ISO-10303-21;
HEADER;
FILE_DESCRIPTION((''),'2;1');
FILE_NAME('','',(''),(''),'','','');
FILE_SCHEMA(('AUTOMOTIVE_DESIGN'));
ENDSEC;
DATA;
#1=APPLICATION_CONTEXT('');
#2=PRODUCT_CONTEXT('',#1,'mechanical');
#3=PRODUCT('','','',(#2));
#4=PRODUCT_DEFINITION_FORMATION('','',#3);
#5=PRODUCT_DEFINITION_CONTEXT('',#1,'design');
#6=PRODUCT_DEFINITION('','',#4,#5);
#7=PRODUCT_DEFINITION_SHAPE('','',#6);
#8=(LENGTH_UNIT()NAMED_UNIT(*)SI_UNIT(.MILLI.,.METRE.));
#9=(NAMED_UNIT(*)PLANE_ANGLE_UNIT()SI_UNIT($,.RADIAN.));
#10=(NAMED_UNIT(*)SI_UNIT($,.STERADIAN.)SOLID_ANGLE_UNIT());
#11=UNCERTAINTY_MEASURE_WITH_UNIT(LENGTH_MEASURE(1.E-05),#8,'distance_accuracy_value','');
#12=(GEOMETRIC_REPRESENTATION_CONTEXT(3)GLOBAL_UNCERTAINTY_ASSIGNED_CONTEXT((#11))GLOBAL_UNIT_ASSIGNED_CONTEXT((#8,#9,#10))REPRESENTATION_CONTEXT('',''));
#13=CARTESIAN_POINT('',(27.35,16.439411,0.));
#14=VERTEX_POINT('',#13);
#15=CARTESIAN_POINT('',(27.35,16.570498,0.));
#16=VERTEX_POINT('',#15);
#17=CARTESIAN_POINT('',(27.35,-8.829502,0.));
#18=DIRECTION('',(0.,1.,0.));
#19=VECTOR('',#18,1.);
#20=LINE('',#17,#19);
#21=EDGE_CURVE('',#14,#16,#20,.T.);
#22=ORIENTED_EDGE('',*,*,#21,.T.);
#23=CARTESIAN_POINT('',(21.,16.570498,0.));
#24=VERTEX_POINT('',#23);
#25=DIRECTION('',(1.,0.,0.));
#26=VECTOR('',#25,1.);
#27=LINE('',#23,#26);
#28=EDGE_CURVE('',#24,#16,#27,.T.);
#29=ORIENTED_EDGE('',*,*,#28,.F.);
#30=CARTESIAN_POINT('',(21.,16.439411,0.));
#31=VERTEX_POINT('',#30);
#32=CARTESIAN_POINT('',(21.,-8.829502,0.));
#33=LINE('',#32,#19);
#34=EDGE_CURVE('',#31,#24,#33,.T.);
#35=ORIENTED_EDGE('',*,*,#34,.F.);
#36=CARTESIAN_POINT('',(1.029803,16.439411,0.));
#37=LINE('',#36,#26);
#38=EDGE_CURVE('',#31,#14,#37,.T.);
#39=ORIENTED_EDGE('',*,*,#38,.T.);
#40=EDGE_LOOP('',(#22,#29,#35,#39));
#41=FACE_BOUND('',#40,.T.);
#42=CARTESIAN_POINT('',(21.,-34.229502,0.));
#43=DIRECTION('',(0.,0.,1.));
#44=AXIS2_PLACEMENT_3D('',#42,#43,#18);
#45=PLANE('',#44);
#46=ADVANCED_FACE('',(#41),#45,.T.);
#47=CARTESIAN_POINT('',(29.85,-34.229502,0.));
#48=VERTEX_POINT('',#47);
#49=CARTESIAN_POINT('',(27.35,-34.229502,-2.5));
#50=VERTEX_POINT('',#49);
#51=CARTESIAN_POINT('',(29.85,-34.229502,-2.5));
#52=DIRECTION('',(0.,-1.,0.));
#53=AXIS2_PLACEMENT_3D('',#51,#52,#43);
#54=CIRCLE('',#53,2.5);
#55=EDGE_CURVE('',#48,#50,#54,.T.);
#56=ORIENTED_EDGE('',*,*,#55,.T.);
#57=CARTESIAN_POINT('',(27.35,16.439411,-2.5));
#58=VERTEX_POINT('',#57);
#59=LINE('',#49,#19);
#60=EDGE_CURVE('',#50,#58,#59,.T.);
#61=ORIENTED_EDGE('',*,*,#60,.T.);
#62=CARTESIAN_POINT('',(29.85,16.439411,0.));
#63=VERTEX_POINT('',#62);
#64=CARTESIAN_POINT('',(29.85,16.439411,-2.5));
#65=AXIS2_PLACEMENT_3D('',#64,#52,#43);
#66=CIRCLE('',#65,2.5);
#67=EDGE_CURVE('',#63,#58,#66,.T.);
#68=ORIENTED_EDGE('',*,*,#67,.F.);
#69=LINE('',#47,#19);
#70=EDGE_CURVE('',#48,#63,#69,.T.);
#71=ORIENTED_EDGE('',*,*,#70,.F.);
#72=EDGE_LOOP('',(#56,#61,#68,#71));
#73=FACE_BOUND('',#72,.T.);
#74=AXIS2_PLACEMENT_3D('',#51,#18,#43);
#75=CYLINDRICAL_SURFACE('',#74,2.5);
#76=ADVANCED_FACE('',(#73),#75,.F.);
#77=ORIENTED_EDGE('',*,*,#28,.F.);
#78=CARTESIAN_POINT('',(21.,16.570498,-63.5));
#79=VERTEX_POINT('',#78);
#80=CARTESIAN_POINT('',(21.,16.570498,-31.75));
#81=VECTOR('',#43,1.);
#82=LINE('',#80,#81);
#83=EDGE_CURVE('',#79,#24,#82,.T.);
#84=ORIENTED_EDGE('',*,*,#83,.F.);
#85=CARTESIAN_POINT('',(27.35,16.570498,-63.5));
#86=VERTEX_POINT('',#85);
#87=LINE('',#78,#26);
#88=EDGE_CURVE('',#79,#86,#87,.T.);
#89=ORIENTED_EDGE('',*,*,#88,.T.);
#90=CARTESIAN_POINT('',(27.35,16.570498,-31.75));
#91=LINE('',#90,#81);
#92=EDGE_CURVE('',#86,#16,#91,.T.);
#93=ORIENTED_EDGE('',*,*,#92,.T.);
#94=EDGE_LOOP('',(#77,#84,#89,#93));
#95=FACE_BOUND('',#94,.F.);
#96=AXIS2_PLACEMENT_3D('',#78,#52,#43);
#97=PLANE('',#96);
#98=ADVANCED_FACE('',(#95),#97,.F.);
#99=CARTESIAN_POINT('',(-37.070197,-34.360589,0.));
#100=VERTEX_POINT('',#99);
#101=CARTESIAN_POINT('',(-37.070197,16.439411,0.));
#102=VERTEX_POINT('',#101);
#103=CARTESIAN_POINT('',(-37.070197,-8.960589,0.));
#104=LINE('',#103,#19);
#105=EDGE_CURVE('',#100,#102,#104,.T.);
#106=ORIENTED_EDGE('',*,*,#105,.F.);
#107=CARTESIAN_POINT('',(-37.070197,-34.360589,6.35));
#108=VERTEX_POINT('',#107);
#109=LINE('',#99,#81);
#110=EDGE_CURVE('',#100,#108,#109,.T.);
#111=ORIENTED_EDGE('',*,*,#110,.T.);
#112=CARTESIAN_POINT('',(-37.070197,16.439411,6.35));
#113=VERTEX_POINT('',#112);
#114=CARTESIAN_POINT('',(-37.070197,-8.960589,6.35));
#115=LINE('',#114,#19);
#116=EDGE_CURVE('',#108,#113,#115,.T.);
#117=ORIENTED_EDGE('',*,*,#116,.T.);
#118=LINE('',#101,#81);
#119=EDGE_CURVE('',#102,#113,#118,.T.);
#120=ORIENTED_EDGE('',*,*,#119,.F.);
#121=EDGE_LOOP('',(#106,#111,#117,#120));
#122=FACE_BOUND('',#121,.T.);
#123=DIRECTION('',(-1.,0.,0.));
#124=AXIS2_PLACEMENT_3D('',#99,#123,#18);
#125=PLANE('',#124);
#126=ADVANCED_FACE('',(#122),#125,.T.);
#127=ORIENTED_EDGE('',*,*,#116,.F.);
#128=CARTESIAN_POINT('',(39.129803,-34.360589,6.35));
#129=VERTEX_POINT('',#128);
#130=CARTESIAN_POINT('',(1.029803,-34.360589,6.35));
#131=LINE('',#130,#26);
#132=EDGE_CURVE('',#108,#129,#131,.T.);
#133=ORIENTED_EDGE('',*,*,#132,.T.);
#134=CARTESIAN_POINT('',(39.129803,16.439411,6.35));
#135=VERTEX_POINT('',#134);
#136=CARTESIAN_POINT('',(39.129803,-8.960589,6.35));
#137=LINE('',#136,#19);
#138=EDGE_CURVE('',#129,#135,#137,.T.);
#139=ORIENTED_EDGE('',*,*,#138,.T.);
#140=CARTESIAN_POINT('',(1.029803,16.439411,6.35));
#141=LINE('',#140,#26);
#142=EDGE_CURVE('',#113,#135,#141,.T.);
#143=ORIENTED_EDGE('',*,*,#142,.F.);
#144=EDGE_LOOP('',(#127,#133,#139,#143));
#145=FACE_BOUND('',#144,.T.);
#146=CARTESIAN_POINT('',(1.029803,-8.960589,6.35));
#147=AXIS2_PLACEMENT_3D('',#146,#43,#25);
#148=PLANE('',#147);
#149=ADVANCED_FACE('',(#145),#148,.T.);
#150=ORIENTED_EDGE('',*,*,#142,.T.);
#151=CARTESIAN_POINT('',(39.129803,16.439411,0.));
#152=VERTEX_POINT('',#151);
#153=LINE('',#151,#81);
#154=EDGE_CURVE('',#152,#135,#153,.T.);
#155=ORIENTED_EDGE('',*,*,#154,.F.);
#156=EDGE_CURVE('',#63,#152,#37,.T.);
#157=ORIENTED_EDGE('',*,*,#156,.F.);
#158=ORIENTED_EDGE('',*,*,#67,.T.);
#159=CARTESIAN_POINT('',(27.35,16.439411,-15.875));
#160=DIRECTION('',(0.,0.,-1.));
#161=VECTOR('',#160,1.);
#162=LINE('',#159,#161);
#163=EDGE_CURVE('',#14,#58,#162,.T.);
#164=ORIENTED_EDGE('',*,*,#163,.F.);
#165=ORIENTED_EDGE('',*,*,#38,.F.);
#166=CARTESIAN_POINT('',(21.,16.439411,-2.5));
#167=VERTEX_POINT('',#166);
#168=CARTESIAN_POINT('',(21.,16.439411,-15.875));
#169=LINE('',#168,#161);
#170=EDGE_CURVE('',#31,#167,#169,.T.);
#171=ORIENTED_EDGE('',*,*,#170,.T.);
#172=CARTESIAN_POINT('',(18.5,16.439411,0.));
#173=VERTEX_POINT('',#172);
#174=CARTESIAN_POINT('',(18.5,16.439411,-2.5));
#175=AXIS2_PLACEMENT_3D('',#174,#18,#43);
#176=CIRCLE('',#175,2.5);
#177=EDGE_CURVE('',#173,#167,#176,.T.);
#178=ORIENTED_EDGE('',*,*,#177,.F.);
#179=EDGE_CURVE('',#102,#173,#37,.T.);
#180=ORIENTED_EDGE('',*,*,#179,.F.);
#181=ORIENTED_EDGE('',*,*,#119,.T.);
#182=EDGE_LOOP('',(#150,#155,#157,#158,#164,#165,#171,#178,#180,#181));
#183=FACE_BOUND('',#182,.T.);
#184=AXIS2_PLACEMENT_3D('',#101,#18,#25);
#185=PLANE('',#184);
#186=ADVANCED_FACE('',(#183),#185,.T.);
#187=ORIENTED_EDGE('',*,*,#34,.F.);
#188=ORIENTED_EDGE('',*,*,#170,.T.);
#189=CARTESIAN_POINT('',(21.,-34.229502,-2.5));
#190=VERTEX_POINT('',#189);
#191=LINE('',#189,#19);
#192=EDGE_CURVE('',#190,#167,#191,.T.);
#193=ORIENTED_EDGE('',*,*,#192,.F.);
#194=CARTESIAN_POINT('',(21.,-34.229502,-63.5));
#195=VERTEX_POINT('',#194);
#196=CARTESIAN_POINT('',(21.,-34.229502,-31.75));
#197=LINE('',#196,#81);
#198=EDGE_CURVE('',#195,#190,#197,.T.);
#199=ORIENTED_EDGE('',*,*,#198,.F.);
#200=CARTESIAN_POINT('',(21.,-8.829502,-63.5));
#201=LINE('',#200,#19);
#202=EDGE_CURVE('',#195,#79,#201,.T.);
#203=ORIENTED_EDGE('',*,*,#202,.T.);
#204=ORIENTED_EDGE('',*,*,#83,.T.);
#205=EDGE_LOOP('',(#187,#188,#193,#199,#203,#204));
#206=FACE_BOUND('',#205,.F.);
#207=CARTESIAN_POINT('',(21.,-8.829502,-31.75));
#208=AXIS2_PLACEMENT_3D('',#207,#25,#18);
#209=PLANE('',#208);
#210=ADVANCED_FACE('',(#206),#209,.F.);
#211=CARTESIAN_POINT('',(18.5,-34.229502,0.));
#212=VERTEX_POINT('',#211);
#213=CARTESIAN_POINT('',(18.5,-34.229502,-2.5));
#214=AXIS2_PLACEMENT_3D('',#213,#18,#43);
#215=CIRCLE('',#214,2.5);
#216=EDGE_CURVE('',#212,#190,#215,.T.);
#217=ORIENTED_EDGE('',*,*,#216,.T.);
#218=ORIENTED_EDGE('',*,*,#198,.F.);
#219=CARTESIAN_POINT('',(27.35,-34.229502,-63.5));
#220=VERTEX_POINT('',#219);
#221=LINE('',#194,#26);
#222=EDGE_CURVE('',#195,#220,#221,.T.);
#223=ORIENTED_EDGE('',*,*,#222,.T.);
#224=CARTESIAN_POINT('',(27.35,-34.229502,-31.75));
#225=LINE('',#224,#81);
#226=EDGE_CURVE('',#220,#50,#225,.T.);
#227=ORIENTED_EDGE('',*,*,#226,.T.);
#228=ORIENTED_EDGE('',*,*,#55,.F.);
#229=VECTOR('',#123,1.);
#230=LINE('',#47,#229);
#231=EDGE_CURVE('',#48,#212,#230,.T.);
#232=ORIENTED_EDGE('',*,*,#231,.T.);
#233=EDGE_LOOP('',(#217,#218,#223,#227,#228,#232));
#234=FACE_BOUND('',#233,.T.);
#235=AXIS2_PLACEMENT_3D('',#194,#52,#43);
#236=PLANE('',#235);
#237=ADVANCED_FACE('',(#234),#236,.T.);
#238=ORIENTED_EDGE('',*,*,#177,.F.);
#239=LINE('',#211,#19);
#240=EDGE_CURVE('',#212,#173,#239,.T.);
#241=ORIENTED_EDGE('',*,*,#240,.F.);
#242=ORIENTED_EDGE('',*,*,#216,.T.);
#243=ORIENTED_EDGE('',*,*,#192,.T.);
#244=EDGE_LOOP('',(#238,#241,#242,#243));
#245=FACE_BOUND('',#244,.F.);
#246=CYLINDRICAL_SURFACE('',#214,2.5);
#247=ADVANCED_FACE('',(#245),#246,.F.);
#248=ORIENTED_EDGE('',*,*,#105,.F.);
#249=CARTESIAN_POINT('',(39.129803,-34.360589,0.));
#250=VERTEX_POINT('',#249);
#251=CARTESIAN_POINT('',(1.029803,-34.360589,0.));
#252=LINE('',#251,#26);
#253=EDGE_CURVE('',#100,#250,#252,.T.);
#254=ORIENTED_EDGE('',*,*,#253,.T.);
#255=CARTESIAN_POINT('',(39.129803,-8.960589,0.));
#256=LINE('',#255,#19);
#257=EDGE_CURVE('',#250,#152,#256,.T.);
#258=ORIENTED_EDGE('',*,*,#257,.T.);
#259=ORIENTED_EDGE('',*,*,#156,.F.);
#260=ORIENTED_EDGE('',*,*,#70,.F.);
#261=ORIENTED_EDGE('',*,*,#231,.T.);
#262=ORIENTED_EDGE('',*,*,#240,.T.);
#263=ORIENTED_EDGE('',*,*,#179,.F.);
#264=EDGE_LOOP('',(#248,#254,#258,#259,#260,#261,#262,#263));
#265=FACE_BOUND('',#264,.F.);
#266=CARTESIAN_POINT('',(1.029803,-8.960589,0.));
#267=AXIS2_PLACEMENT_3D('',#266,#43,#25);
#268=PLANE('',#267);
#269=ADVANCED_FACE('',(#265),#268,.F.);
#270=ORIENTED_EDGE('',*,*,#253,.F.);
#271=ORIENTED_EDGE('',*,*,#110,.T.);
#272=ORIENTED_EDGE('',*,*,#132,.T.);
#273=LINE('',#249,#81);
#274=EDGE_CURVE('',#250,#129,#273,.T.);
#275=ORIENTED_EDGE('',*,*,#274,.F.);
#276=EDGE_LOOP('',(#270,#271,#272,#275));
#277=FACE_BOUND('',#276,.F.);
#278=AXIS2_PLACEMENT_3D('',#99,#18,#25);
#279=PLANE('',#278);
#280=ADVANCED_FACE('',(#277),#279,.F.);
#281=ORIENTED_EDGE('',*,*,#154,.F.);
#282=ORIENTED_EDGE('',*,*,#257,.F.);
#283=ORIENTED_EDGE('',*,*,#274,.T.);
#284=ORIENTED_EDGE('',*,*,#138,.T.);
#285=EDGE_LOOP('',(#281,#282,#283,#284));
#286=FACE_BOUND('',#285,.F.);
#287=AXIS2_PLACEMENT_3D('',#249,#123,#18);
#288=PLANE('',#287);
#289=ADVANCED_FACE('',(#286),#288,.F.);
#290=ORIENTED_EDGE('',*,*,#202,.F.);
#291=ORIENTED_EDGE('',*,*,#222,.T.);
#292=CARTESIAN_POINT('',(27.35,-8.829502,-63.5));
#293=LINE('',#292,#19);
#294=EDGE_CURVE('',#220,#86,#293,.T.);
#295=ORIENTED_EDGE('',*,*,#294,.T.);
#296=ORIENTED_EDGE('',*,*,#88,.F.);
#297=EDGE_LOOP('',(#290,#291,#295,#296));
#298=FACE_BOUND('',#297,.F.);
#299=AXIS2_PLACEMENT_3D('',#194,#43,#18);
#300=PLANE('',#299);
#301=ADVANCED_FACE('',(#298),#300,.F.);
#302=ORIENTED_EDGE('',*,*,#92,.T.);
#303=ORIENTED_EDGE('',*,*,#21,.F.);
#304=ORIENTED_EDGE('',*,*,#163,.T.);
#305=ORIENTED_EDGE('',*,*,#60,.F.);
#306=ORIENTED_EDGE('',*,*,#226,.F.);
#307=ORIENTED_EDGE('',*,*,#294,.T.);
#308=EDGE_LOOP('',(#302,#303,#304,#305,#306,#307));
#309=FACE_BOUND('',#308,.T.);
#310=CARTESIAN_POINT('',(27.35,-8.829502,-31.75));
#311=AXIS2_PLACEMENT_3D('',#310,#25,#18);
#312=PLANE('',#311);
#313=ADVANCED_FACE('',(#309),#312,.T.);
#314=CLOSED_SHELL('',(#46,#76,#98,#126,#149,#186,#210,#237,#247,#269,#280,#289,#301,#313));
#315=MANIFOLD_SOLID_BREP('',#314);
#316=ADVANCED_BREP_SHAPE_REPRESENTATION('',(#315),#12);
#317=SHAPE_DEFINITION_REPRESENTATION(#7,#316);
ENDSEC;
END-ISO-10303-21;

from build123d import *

# Parameters (mm, degrees)
F0_W     = 76.2
F0_H     = 50.8
F1_DEPTH = 6.35
F3_W     = 50.8
F3_H     = 63.5
F4_DEPTH = 6.35
F5_R     = 2.5


with BuildPart() as f1:
    # F0 (on Top) → F1 (new body)
    with BuildSketch(Plane.XY):
        with Locations((1.0298034176, -8.9605891951)):
            Rectangle(F0_W, F0_H)
    extrude(amount=F1_DEPTH)

    # F3 (on offset) → F4 (join)
    with BuildSketch(Plane.YZ.offset(21)):
        with Locations((-8.8295020819, -31.75)):
            Rectangle(F3_W, F3_H)
    extrude(amount=F4_DEPTH)

    # F5
    f5_edges = [f1.edges().sort_by_distance(p)[0] for p in [
        (21, -8.895046, 0),
        (27.35, -8.895046, 0),
    ]]
    fillet(f5_edges, radius=F5_R)


solid = f1.part
